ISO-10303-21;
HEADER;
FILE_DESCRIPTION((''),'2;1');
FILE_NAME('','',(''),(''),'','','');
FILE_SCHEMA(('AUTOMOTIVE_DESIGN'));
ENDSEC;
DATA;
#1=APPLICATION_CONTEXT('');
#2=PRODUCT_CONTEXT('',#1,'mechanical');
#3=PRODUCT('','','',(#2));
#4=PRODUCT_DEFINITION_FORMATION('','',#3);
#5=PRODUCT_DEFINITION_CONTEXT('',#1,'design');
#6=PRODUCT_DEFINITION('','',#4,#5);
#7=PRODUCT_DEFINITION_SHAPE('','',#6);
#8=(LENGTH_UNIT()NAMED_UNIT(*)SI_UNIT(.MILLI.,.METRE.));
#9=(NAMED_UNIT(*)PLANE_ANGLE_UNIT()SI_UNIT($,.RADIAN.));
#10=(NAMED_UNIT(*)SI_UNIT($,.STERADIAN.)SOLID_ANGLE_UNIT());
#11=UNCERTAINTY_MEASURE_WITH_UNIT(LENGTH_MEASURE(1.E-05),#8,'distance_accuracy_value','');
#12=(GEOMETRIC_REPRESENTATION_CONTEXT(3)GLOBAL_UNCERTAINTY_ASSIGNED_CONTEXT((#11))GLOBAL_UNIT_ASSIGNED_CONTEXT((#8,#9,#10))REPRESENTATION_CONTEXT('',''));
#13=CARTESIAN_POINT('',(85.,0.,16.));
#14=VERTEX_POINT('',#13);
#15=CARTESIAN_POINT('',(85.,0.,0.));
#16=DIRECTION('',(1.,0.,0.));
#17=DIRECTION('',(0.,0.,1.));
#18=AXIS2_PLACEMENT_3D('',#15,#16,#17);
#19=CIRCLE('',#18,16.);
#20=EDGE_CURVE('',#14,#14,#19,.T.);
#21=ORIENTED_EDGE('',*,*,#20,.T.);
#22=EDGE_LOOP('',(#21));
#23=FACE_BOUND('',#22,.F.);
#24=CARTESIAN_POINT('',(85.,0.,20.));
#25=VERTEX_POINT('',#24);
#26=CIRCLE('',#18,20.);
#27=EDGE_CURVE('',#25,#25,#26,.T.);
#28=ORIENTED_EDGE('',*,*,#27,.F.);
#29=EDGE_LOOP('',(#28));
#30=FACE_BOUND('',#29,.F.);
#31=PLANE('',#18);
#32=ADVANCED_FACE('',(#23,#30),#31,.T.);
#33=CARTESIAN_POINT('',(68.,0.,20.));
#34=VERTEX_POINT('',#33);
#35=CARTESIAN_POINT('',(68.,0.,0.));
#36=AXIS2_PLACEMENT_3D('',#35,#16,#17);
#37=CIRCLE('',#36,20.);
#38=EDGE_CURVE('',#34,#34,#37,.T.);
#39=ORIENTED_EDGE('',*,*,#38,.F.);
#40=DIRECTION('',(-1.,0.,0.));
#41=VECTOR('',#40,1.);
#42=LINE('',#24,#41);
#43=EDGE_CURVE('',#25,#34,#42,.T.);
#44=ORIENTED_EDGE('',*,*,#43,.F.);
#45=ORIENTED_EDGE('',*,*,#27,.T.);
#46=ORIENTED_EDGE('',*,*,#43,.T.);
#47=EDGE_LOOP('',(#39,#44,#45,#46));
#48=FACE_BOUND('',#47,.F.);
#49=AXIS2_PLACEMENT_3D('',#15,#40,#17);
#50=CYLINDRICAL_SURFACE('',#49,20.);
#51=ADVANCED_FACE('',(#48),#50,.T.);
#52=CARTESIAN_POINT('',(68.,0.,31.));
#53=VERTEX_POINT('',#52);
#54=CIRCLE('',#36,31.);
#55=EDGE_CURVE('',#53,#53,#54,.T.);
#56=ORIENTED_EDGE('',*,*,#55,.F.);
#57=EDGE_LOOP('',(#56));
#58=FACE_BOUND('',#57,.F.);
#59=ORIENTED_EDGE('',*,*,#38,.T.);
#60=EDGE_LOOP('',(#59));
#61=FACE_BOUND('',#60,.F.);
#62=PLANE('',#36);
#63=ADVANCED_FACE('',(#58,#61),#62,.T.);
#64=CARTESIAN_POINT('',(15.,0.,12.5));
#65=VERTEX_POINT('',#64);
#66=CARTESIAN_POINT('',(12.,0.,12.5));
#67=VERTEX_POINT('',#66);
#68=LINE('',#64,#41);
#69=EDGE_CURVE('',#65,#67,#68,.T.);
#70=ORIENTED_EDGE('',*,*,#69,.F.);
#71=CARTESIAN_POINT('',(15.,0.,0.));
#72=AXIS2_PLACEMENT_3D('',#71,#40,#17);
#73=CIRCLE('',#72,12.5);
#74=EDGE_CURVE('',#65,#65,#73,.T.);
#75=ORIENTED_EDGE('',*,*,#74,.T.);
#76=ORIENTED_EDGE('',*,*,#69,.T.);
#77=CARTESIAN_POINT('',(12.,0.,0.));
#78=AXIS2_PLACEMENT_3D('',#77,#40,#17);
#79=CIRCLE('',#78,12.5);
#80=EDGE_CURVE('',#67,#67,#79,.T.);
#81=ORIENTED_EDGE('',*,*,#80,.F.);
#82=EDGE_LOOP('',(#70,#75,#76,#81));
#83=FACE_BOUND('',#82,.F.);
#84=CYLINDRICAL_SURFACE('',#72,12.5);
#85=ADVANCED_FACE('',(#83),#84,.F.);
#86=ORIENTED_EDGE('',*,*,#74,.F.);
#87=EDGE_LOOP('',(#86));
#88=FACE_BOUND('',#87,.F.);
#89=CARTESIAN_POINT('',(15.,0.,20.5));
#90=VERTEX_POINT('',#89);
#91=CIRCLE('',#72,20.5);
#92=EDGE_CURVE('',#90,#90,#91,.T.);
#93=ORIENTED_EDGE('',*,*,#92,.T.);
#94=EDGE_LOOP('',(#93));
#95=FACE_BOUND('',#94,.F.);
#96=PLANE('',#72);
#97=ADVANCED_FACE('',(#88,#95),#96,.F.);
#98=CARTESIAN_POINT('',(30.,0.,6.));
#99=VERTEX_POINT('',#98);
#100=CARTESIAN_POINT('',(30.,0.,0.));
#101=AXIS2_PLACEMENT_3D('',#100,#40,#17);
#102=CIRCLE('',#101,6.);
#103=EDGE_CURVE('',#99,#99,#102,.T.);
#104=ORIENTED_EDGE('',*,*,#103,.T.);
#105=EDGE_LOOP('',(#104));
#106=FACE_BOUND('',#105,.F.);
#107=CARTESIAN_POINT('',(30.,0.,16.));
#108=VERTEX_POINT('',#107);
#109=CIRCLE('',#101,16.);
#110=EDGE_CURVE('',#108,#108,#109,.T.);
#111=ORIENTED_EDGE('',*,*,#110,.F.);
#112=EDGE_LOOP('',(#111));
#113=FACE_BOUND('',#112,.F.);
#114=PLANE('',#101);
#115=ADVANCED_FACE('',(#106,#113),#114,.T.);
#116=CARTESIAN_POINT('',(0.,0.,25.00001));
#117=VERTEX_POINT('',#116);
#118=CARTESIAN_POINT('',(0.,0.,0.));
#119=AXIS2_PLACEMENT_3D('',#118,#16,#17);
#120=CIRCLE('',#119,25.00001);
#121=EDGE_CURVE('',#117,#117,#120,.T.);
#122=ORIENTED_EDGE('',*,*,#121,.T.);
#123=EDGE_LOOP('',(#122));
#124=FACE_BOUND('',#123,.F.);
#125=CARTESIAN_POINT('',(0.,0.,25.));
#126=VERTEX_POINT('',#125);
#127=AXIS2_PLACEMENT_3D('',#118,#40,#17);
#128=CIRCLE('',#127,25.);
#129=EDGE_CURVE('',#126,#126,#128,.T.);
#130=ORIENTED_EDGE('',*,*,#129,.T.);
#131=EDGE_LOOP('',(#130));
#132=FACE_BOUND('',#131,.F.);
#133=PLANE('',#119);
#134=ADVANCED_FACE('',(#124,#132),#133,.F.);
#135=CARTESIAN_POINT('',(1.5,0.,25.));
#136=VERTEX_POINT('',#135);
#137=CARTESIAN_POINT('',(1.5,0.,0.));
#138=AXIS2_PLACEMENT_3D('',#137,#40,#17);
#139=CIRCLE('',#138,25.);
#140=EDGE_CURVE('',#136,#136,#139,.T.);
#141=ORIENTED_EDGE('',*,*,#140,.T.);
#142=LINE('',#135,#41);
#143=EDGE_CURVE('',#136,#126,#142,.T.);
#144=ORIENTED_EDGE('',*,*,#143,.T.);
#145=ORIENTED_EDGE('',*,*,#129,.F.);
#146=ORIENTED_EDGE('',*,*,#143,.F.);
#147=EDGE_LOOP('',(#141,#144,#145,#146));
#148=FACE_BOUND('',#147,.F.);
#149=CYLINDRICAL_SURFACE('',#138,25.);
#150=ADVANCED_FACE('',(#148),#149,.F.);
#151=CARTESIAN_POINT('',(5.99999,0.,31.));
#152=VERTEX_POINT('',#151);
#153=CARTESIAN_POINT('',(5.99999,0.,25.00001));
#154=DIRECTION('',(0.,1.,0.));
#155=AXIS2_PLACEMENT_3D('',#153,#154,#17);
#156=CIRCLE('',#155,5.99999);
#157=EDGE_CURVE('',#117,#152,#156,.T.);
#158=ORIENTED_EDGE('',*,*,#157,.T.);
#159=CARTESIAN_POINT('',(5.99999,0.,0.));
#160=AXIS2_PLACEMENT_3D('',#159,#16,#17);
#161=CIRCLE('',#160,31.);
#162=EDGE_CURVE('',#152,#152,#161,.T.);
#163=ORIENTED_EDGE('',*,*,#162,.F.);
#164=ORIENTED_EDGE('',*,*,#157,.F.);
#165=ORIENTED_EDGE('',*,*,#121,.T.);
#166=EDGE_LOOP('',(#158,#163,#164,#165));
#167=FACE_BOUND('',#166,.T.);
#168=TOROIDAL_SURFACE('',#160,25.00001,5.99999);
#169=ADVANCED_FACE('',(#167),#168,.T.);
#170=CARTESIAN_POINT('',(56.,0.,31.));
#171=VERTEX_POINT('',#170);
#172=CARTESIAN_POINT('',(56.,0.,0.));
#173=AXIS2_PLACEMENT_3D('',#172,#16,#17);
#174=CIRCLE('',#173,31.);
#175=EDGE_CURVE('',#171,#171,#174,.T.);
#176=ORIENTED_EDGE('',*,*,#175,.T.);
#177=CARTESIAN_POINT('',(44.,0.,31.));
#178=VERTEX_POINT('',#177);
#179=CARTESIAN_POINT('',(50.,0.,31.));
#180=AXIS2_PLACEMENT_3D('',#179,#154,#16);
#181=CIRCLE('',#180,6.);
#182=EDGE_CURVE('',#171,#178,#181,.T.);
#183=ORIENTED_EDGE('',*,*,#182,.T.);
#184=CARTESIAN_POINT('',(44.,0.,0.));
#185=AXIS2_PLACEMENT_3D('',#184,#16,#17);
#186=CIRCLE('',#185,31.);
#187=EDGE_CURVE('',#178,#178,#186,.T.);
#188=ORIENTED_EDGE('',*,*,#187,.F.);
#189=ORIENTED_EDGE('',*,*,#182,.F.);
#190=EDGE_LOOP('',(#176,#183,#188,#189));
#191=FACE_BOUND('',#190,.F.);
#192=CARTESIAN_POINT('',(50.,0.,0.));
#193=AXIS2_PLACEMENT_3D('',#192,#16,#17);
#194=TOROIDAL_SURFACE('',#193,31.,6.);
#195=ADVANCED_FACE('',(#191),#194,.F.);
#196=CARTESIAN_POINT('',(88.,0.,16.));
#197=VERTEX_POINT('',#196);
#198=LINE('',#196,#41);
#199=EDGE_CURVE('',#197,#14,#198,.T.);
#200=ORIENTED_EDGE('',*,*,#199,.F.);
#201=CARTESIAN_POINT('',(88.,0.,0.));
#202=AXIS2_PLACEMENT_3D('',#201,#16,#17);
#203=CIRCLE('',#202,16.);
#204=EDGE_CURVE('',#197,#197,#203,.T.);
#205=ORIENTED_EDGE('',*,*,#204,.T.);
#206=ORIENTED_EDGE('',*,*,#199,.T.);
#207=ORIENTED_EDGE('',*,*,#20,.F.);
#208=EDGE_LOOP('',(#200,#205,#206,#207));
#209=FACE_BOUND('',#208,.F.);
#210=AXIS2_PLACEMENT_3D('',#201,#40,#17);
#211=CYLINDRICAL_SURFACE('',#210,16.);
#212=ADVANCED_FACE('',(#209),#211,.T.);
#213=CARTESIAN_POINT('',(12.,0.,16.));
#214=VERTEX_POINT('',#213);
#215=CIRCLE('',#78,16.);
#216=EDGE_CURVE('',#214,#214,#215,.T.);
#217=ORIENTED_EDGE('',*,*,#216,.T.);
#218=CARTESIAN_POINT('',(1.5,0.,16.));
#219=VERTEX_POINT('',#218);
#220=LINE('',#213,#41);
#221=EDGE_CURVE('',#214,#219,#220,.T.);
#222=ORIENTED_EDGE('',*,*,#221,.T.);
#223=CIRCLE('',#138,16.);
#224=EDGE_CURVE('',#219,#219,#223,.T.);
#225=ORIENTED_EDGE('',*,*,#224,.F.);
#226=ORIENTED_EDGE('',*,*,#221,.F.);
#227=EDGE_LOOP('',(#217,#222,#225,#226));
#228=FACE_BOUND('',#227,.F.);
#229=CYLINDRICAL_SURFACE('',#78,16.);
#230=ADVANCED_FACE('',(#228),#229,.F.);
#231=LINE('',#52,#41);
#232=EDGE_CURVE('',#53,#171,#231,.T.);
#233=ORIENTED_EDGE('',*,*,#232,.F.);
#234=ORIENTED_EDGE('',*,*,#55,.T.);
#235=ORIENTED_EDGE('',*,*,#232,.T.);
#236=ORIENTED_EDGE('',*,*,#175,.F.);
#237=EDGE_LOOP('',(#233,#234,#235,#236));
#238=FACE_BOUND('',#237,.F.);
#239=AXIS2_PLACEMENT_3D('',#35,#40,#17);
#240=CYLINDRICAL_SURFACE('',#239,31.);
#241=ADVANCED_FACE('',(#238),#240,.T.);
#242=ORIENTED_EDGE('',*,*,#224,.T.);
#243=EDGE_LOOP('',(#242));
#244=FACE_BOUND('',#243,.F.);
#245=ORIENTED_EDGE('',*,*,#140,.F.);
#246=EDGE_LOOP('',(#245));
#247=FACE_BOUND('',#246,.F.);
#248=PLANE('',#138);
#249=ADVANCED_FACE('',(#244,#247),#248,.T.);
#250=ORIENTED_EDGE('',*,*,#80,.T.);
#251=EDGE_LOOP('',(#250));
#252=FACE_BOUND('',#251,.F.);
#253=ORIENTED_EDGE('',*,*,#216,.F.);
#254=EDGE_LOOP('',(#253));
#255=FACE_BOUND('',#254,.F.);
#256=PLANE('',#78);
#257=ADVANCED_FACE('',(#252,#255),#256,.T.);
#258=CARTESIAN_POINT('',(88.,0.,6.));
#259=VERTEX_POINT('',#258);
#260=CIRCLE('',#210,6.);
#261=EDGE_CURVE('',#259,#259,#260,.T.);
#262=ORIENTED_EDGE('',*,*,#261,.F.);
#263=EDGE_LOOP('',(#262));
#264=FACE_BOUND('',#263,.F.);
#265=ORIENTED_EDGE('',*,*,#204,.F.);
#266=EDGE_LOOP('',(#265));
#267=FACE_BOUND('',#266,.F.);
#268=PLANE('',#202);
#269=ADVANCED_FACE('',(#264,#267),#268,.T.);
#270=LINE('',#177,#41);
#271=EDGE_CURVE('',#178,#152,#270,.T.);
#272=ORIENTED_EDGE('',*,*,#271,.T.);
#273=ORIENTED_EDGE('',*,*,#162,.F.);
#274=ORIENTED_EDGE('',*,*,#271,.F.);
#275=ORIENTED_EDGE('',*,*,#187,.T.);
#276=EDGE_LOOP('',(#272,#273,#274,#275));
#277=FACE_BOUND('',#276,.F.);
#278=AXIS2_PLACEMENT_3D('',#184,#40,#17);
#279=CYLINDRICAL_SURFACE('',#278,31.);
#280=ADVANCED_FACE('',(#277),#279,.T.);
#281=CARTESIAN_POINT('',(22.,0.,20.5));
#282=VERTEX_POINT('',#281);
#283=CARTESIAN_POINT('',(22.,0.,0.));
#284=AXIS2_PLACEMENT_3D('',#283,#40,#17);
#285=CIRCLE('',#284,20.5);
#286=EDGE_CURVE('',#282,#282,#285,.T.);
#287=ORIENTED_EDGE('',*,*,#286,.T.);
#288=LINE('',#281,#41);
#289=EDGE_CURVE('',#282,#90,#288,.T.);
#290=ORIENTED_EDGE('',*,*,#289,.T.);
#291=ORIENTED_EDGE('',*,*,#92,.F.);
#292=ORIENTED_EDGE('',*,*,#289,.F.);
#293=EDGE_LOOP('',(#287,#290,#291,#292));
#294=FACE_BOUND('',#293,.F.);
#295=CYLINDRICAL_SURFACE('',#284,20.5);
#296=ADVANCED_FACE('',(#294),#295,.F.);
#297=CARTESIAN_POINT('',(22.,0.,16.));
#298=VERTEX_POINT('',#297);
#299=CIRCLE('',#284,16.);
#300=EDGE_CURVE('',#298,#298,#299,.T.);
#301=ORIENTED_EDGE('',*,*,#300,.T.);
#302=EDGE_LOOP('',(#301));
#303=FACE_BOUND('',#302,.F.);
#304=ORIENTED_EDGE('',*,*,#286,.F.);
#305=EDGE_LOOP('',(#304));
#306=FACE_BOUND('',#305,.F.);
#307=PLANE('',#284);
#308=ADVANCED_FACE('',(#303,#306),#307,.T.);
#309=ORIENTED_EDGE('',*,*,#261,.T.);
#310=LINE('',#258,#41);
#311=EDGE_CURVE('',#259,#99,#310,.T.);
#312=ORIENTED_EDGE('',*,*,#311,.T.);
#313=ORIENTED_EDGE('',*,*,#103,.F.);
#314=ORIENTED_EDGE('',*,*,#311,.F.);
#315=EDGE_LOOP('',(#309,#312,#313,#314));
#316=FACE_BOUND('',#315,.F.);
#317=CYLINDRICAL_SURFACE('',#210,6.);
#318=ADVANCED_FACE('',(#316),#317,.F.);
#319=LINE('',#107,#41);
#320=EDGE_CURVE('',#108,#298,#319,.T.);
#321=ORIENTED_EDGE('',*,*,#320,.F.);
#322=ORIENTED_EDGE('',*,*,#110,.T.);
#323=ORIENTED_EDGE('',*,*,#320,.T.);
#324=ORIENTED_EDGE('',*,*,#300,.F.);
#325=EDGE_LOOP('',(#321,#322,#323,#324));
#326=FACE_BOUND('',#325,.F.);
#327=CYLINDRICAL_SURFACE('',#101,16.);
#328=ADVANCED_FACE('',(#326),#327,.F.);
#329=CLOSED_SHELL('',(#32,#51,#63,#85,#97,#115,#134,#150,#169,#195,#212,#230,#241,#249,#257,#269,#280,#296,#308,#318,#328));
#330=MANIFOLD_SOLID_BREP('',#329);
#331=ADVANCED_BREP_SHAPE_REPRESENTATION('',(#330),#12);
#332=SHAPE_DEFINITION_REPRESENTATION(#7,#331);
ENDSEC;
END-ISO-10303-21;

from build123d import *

# Parameters (mm, degrees)
F4_R = 5.99999


# Not quite as in the source:
# - a fillet or chamfer is up to 0.001 mm smaller than in the source, because OpenCascade refuses the exact size


with BuildPart() as f1:
    # F0 (on Front) → F1 (revolve)
    with BuildSketch(Plane.XZ):
        with BuildLine():
            Line((0, 31), (0, 0))
            Line((0, 0), (88, 0))
            Line((88, 0), (88, 16))
            Line((88, 16), (85, 16))
            Line((85, 16), (85, 20))
            Line((85, 20), (68, 20))
            Line((68, 20), (68, 31))
            Line((68, 31), (56, 31))
            ThreePointArc((56, 31), (50, 25), (44, 31))
            Line((44, 31), (0, 31))
        make_face()
    revolve(axis=Axis((44, 0, 0), (1, 0, 0)))

    # F2 (on Front) → F3 (revolve, cut)
    with BuildSketch(Plane.XZ):
        Polygon((0, 25), (0, 0), (88, 0), (88, 6), (30, 6), (30, 16), (22, 16), (22, 20.5), (15, 20.5), (15, 12.5), (12, 12.5), (12, 16), (1.5, 16), (1.5, 25), align=None)
    revolve(axis=Axis((44, 0, 0), (-1, 0, 0)), mode=Mode.SUBTRACT)

    # F4 (radius 6 in the source; OpenCascade refuses exactly that, so slightly less here)
    f4_edges = [f1.edges().sort_by_distance(p)[0] for p in [
        (0, 0, -31),
    ]]
    fillet(f4_edges, radius=F4_R)


solid = f1.part
